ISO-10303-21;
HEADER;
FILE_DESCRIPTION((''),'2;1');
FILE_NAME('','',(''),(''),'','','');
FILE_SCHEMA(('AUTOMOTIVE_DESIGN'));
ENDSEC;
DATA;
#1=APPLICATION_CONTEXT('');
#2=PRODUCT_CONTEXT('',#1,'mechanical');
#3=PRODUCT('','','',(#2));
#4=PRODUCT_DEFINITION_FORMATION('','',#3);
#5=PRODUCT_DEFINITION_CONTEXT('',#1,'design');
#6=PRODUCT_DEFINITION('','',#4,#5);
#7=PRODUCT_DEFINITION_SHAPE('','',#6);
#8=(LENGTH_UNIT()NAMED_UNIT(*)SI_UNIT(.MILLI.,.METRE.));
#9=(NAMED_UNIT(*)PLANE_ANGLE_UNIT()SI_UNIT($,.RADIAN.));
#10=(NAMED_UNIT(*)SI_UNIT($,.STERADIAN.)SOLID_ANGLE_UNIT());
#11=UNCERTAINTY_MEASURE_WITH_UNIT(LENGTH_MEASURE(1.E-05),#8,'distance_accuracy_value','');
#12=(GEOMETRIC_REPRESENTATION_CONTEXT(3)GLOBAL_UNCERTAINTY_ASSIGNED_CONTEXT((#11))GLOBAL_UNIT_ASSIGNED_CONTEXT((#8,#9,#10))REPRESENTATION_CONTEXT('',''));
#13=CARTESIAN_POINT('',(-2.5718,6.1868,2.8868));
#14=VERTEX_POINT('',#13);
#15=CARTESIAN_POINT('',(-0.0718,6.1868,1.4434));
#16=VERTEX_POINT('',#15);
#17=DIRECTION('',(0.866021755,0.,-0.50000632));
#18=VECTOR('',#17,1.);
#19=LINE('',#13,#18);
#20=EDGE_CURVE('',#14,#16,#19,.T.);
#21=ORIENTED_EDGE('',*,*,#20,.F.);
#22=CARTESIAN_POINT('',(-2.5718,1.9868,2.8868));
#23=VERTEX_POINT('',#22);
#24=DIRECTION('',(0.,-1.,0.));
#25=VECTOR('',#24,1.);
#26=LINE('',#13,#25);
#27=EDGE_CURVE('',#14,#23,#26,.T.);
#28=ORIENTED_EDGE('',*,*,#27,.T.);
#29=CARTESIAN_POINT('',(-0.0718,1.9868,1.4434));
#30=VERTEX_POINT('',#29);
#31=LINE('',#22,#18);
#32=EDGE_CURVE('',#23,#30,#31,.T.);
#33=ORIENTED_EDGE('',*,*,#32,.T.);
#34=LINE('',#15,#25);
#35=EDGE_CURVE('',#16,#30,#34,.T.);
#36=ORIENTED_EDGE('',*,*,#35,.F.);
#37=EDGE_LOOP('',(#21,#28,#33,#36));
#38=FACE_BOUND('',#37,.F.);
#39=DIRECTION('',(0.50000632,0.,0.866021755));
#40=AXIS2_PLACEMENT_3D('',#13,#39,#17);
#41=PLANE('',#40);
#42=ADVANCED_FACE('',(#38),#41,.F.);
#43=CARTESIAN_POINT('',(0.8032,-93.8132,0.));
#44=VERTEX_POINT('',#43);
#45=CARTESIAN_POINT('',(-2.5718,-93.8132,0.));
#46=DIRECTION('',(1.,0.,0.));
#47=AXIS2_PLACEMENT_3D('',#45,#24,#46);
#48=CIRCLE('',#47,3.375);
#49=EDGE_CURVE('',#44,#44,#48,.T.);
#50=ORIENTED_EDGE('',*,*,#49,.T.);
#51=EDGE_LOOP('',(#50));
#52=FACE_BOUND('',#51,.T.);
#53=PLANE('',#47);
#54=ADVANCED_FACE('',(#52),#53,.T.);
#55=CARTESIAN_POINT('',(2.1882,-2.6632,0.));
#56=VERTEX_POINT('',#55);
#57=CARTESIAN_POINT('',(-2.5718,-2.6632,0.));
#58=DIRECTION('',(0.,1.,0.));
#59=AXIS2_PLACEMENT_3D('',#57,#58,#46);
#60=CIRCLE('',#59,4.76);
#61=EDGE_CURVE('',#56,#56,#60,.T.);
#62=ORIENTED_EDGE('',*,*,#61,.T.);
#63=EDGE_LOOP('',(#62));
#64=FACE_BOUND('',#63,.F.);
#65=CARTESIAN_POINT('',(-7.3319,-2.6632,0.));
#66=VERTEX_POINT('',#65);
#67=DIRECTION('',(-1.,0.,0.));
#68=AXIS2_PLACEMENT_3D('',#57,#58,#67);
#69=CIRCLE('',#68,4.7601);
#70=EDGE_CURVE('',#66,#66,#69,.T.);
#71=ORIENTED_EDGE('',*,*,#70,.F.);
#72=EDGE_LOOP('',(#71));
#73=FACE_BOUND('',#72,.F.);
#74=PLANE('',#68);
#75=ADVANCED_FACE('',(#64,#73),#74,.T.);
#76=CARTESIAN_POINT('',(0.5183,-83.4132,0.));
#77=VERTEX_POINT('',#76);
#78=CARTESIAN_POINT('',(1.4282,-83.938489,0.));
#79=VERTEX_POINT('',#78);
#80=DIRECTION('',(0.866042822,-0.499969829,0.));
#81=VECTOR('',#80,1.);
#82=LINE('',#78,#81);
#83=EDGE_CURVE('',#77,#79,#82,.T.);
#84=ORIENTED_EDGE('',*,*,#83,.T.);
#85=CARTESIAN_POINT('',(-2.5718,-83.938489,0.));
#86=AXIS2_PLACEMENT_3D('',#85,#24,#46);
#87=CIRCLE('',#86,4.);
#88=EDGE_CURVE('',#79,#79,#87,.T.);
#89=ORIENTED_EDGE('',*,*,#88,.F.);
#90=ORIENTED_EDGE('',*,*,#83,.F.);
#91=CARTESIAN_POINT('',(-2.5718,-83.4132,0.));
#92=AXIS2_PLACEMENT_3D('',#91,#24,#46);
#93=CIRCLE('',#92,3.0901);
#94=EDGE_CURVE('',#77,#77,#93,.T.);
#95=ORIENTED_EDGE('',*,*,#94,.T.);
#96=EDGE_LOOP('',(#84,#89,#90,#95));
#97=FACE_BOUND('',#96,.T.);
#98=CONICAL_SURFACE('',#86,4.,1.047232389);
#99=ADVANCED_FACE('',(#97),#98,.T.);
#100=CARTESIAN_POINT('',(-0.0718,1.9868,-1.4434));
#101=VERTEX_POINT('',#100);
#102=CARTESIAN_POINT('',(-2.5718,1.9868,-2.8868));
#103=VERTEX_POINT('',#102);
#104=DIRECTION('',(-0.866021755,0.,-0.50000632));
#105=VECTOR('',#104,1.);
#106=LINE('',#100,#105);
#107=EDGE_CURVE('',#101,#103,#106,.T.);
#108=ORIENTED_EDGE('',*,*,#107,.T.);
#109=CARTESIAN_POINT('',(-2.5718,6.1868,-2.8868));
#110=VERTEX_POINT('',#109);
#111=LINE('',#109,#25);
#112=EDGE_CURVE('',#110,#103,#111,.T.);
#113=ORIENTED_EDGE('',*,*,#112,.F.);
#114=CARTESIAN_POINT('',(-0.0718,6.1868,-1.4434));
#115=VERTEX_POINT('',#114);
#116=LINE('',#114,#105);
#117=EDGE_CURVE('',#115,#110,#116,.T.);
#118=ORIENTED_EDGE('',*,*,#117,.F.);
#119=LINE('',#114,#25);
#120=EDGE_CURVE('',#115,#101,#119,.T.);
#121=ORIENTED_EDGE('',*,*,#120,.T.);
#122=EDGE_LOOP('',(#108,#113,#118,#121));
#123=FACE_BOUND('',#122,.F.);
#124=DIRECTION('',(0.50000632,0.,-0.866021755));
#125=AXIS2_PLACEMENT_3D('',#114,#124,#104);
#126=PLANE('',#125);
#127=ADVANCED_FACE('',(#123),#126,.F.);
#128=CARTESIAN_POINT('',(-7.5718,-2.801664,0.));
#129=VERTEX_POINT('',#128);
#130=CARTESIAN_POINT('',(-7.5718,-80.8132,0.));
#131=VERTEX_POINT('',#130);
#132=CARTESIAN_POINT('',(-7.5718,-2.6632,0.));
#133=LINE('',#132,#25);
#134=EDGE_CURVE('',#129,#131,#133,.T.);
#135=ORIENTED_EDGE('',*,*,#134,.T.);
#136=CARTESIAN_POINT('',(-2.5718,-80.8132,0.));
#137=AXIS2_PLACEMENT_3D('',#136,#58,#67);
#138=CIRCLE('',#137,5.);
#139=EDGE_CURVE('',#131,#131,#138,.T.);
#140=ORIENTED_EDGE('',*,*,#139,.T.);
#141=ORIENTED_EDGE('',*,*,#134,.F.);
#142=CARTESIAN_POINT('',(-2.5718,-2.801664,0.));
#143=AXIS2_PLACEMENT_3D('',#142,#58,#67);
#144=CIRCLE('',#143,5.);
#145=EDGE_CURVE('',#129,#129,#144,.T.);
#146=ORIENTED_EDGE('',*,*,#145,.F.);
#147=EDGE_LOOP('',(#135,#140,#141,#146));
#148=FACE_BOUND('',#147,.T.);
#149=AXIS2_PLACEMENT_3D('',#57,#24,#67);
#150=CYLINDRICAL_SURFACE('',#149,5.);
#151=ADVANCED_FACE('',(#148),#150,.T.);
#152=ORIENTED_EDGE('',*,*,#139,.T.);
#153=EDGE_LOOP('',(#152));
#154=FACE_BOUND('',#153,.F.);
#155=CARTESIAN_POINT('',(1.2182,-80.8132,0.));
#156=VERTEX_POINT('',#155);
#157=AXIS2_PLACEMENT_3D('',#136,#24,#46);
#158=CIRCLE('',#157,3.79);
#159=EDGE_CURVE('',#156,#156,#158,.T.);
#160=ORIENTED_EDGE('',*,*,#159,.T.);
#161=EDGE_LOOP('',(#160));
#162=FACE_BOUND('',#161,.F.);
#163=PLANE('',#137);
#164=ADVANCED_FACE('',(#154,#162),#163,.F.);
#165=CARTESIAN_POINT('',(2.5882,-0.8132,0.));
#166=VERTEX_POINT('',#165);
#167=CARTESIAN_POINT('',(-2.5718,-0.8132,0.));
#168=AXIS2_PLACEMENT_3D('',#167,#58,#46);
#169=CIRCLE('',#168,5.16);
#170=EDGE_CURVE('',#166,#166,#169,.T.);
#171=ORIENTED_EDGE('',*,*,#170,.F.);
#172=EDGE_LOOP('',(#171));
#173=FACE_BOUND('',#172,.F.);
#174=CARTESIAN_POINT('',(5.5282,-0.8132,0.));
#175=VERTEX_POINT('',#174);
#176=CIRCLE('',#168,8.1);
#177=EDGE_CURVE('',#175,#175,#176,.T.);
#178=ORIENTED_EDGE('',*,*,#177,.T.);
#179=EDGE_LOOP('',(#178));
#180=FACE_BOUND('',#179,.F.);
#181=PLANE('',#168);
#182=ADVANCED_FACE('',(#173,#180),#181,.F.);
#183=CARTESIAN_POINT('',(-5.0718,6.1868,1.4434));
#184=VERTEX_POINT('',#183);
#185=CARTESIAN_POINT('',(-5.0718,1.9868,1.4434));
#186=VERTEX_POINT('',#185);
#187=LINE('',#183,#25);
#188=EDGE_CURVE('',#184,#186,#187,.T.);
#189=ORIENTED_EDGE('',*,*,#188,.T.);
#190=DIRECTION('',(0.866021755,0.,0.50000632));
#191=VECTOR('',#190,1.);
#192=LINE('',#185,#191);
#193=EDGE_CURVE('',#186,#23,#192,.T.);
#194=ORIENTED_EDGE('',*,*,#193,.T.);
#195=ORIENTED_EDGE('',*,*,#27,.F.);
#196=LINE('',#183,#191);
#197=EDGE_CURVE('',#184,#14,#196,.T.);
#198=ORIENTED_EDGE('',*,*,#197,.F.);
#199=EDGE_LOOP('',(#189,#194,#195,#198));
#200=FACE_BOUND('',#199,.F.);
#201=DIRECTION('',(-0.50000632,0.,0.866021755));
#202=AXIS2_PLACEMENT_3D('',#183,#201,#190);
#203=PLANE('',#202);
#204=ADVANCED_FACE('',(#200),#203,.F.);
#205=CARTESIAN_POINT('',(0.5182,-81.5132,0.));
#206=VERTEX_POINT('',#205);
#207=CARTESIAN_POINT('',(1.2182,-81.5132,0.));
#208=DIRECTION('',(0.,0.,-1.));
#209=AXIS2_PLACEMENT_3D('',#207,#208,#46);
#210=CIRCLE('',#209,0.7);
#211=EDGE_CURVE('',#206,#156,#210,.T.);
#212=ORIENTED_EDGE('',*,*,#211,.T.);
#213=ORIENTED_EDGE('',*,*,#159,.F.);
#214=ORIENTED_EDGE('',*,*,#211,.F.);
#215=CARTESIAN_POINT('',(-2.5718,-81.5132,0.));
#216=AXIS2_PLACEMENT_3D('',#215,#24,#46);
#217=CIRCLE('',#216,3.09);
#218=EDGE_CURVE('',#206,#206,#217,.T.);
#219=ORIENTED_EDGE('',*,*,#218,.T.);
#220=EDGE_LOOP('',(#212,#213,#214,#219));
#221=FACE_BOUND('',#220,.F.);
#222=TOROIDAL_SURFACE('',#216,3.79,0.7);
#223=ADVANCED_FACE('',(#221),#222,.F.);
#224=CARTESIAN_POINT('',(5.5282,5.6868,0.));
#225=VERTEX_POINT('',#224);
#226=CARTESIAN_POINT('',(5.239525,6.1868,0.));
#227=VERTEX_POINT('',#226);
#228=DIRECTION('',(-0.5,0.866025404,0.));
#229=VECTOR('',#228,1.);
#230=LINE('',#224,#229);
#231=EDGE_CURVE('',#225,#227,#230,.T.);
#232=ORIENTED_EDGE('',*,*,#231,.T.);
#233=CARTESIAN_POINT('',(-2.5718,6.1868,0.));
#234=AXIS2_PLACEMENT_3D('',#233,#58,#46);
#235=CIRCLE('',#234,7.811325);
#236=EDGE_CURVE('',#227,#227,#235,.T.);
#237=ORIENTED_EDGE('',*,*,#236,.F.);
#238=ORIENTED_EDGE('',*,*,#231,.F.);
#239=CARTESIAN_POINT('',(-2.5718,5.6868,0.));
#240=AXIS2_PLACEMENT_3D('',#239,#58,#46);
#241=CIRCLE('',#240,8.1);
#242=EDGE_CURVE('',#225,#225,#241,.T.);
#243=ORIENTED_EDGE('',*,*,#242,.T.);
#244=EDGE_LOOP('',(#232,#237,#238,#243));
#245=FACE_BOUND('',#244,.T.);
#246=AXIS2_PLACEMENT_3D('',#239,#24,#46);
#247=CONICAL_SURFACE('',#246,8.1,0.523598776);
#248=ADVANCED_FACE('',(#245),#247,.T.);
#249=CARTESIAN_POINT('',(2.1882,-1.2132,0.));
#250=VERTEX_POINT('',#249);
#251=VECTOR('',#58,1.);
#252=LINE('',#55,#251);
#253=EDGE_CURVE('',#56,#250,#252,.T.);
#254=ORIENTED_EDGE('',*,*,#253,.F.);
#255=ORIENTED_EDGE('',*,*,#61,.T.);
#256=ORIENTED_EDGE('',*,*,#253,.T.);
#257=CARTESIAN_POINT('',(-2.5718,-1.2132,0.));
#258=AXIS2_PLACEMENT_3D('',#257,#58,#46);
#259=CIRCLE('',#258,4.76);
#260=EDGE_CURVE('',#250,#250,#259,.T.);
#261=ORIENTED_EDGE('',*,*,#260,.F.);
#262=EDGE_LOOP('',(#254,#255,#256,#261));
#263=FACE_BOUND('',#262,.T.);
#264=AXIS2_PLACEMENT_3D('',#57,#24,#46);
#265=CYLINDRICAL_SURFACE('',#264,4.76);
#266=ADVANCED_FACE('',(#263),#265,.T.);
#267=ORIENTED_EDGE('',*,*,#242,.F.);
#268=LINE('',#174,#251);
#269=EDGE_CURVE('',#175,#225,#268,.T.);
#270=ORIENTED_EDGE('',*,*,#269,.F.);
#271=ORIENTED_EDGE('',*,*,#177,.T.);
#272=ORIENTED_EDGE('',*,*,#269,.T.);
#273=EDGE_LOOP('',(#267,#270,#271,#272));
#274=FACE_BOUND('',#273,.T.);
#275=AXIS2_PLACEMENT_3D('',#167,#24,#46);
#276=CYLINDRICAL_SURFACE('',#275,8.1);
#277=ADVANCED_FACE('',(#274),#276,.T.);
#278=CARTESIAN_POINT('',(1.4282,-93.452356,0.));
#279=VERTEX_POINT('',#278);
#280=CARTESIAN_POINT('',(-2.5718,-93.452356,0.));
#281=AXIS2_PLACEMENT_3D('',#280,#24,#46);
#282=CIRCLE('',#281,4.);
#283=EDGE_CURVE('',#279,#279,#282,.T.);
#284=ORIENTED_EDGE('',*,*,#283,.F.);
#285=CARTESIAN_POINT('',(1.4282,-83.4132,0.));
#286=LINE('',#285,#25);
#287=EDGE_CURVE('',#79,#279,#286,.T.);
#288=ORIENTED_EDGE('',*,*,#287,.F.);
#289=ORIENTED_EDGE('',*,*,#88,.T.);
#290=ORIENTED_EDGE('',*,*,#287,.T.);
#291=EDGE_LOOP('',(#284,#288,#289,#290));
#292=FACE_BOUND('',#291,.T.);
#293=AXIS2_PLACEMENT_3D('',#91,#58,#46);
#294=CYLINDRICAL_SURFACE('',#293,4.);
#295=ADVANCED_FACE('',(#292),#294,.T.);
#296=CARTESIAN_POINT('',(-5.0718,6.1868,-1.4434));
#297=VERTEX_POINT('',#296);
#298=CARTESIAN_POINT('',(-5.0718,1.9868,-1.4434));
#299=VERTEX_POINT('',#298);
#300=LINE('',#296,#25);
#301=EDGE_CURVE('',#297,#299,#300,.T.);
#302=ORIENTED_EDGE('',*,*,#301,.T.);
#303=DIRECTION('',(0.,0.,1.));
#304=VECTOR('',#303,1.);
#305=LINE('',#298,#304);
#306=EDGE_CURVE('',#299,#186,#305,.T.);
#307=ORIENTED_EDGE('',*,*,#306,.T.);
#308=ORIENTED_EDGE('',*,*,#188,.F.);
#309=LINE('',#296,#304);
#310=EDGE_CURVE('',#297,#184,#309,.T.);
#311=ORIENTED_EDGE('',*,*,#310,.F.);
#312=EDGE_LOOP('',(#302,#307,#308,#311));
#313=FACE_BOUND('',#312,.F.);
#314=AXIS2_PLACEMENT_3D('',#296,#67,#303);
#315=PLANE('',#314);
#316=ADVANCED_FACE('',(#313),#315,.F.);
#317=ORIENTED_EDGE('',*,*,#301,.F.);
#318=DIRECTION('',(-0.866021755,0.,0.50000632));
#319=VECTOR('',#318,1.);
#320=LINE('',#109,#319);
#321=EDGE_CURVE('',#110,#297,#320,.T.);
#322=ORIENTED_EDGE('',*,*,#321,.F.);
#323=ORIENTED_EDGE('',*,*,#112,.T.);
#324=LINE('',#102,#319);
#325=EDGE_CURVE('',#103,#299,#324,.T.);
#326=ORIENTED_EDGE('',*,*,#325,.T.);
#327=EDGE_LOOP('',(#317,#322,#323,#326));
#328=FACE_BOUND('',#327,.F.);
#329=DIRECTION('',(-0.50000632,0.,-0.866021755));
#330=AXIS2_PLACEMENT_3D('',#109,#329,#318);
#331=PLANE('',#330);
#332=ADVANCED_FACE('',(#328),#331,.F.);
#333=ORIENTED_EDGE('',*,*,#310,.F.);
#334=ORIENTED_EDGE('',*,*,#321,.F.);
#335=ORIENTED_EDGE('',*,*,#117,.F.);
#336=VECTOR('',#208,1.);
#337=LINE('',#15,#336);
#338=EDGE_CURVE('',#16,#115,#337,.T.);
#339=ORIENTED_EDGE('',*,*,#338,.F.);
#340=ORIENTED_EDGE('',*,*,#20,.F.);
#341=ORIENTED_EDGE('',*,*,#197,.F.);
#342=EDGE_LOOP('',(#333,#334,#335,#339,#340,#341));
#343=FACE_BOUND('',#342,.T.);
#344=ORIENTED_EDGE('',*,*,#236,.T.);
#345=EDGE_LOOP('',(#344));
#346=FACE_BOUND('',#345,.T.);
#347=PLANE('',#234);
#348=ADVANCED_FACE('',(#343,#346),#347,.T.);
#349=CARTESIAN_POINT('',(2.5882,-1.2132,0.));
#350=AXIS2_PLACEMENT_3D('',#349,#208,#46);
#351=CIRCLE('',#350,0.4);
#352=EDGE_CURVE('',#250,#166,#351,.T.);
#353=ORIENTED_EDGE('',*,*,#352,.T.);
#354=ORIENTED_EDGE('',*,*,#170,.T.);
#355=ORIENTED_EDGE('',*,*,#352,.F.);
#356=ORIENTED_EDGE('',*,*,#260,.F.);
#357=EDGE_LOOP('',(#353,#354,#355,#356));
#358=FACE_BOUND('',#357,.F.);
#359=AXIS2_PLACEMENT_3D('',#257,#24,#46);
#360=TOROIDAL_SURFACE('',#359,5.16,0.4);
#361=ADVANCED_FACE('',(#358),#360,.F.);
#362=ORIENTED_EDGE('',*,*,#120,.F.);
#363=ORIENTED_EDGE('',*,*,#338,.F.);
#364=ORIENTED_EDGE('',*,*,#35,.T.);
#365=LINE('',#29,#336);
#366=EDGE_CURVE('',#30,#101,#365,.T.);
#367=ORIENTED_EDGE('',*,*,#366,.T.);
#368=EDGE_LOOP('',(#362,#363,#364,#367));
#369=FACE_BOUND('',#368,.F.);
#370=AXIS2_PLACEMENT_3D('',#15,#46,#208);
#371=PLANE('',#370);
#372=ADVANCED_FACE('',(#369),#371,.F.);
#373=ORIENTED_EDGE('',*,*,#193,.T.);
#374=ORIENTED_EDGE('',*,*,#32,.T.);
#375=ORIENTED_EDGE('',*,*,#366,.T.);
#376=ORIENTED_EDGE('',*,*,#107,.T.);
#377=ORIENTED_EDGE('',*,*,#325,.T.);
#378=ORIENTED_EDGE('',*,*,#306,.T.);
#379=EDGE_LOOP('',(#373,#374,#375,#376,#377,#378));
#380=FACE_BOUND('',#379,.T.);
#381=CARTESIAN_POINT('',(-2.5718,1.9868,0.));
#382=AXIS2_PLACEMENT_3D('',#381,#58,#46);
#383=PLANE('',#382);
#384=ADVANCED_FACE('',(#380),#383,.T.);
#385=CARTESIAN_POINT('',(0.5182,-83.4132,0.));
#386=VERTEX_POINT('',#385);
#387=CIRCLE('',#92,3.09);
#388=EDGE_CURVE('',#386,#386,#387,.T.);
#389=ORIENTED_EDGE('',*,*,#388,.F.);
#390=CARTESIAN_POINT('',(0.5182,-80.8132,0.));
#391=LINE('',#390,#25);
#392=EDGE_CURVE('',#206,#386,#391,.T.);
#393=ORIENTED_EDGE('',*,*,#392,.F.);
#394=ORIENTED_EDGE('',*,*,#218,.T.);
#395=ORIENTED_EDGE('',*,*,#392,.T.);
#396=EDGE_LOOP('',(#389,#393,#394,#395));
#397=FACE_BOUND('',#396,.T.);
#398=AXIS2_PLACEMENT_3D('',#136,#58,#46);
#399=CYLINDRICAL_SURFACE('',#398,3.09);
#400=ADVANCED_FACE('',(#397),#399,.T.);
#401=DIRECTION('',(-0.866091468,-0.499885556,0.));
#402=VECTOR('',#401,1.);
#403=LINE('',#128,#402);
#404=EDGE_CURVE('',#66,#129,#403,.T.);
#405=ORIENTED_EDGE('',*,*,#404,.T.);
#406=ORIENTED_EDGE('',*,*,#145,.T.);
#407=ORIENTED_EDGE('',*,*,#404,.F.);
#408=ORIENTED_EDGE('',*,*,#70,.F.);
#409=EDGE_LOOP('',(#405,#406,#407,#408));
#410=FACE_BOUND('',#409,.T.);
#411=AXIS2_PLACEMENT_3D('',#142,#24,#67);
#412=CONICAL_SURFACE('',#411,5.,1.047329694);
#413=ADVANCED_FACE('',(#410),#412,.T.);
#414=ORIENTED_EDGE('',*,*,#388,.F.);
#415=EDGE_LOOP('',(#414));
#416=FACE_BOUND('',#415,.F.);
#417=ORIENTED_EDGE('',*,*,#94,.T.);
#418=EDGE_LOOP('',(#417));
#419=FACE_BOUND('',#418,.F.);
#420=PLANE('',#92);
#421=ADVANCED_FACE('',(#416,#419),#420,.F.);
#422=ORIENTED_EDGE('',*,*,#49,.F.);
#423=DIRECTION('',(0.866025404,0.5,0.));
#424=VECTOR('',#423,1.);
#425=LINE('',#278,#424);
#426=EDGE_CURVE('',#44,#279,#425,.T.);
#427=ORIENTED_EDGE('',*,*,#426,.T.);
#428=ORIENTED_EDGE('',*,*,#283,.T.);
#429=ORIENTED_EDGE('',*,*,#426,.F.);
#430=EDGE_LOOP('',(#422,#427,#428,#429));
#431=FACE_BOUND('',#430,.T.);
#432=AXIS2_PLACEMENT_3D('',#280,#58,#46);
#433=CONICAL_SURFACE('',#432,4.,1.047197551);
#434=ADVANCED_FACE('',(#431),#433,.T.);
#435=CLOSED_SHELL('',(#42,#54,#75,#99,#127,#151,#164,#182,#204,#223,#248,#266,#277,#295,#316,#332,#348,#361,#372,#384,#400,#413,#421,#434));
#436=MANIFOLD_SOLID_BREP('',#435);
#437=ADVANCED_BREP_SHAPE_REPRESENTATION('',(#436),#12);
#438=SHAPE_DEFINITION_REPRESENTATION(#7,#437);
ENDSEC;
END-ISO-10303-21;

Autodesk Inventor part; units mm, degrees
ref_plane "YZ Plane" through (0, 0, 0) normal (1, 0, 0) x (0, 1, 0)
ref_plane "XZ Plane" through (0, 0, 0) normal (0, 1, 0) x (-1, 0, 0)
ref_plane "XY Plane" through (0, 0, 0) normal (0, 0, 1) x (1, 0, 0)
sketch "Sketch1" plane through (0, 0, 0) normal (0, 0, 1) x (1, 0, 0)
  line L0 (-2.5718, -2.6632) -> (-7.5718, -2.6632)
  line L1 (-7.5718, -2.6632) -> (-7.5718, -80.8132)
  line L2 (-7.5718, -80.8132) -> (-2.5718, -80.8132)
  line L3 (-2.5718, -80.8132) -> (-2.5718, -2.6632)
  dimension "d1" = 78.15
  dimension "d2" = 5
revolve "Shoulder" add sketch "Sketch1" angle 360 about axis through (-2.5718, -80.8132, 0) along (0, 1, 0)
sketch "Sketch2" plane through (-2.5718, -2.6632, 0) normal (0, 1, 0) x (1, 0, 0)
  circle A0 centre (0, 0) radius 5 projected
  circle A1 centre (0, 0) radius 4.76
  dimension "d3" = 9.52
extrude "Shoulder_neck" add sketch "Sketch2" along normal blind 1.85 contours A1
sketch "Sketch3" plane through (-2.5718, -0.8132, 0) normal (0, 1, 0) x (1, 0, 0)
  circle A0 centre (0, 0) radius 4.76 projected
  circle A1 centre (0, 0) radius 8.1
  dimension "d6" = 16.2
extrude "Head" add sketch "Sketch3" along normal blind 7 contours A0 | A1
sketch "Sketch4" plane through (-2.5718, -80.8132, 0) normal (0, -1, 0) x (1, 0, 0)
  circle A0 centre (0, 0) radius 5 projected
  circle A1 centre (0, 0) radius 3.09
  dimension "d9" = 6.18
extrude "Thread_neck" add sketch "Sketch4" along normal blind 2.6 contours A1
sketch "Sketch5" plane through (-2.5718, -83.4132, 0) normal (0, -1, 0) x (1, 0, 0)
  circle A0 centre (0, 0) radius 3.09 projected
  circle A1 centre (0, 0) radius 4
  dimension "d12" = 8
extrude "Thread_shoulder" add sketch "Sketch5" along normal blind 10.4 contours A0 | A1
sketch "Sketch6" plane through (-2.5718, 6.1868, 0) normal (0, 1, 0) x (1, 0, 0)
  circle A0 centre (0, 0) radius 8.1 projected
  circle A1 centre (0, 0) radius 2.5 construction
  line L0 (-2.5, 1.4434) -> (-2.5, -1.4434)
  line L1 (-2.5, -1.4434) -> (0, -2.8868)
  line L2 (0, -2.8868) -> (2.5, -1.4434)
  line L3 (2.5, -1.4434) -> (2.5, 1.4434)
  line L4 (2.5, 1.4434) -> (0, 2.8868)
  line L5 (0, 2.8868) -> (-2.5, 1.4434)
  dimension "d15" = 5
extrude "Hex" cut sketch "Sketch6" against normal blind 4.2 contours L5 L4 L3 L2 L1 L0
chamfer "Chamfer1" distance 0.24 angle 30 1 edges at (2.4282, -2.6632, 0) measured on face at (-7.3973, -2.6632, -0.7786)
fillet "Fillet1" radius 0.4 1 edges at (-7.3318, -0.8132, 0)
chamfer "Chamfer2" distance 0.5 angle 30 1 edges at (-10.6718, 6.1868, 0) measured on face at (5.4233, 3.8535, 1.2993)
chamfer "Chamfer3" distance 0.625 angle 30 1 edges at (-6.5718, -93.8132, 0) measured on face at (-1.8144, -93.8132, 1.0973)
fillet "Fillet2" radius 0.7 1 edges at (-5.6618, -80.8132, 0)
chamfer "Chamfer7" distance 0.91 angle 30 1 edges at (-6.5718, -83.4132, 0) measured on face at (1.0861, -83.4132, -0.3191)
thread "Thread" size "M8x1.25" class "6g" standard "ANSI Metric M Profile" full length
equation "\"d1\" = Shoulder_length - Shoulder_neck_length"
equation "\"d2\" = 0.5 * Shoulder_diameter"
equation "\"d3\" = Shoulder_neck_dia"
equation "\"d4\" = Shoulder_neck_length"
equation "\"d6\" = Head_diameter"
equation "\"d7\" = Head_height"
equation "\"d9\" = Thread_neck_dia"
equation "\"d10\" = Thread_neck_length"
equation "\"d12\" = Thread_diameter"
equation "\"d13\" = Thread_length - Thread_neck_length"
equation "\"d15\" = Hex_size"
equation "\"d16\" = Hex_length"
equation "\"d18\" = -0.5 * Shoulder_neck_dia + 0.5 * Shoulder_diameter"
equation "\"d64\" = -0.5 * Shoulder_neck_dia + 0.5 * Shoulder_diameter"
equation "\"d21\" = 0.1 * Hex_size"
equation "\"d65\" = 0.1 * Hex_size"
equation "\"d23\" = 0.5 * Thread_pitch"
equation "\"d66\" = 0.5 * Thread_pitch"
equation "\"d25\" = Thread_neck_radius"
equation "\"d60\" = -0.5 * Thread_neck_dia + 0.5 * Thread_diameter"
equation "\"d67\" = -0.5 * Thread_neck_dia + 0.5 * Thread_diameter"
equation "\"Shoulder_length\" = 80"
equation "\"Shoulder_neck_dia\" = 9.52"
equation "\"Thread_diameter\" = 8"
equation "\"Thread_length\" = 13"
equation "\"Head_diameter\" = 16.2"
equation "\"Head_height\" = 7"
equation "\"Thread_neck_dia\" = 6.18"
equation "\"Hex_size\" = 5"
equation "\"Hex_length\" = 4.2"
equation "\"Thread_pitch\" = 1.25"
equation "\"Shoulder_neck_length\" = 1.85"
equation "\"Thread_neck_length\" = 2.6"
equation "\"Thread_neck_radius\" = 0.7"
equation "\"Shoulder_diameter\" = 10"
properties part number "SCREW, SHOULDER, P, 12.9,  M10X80MM" material "Steel, High Strength Low Alloy"
